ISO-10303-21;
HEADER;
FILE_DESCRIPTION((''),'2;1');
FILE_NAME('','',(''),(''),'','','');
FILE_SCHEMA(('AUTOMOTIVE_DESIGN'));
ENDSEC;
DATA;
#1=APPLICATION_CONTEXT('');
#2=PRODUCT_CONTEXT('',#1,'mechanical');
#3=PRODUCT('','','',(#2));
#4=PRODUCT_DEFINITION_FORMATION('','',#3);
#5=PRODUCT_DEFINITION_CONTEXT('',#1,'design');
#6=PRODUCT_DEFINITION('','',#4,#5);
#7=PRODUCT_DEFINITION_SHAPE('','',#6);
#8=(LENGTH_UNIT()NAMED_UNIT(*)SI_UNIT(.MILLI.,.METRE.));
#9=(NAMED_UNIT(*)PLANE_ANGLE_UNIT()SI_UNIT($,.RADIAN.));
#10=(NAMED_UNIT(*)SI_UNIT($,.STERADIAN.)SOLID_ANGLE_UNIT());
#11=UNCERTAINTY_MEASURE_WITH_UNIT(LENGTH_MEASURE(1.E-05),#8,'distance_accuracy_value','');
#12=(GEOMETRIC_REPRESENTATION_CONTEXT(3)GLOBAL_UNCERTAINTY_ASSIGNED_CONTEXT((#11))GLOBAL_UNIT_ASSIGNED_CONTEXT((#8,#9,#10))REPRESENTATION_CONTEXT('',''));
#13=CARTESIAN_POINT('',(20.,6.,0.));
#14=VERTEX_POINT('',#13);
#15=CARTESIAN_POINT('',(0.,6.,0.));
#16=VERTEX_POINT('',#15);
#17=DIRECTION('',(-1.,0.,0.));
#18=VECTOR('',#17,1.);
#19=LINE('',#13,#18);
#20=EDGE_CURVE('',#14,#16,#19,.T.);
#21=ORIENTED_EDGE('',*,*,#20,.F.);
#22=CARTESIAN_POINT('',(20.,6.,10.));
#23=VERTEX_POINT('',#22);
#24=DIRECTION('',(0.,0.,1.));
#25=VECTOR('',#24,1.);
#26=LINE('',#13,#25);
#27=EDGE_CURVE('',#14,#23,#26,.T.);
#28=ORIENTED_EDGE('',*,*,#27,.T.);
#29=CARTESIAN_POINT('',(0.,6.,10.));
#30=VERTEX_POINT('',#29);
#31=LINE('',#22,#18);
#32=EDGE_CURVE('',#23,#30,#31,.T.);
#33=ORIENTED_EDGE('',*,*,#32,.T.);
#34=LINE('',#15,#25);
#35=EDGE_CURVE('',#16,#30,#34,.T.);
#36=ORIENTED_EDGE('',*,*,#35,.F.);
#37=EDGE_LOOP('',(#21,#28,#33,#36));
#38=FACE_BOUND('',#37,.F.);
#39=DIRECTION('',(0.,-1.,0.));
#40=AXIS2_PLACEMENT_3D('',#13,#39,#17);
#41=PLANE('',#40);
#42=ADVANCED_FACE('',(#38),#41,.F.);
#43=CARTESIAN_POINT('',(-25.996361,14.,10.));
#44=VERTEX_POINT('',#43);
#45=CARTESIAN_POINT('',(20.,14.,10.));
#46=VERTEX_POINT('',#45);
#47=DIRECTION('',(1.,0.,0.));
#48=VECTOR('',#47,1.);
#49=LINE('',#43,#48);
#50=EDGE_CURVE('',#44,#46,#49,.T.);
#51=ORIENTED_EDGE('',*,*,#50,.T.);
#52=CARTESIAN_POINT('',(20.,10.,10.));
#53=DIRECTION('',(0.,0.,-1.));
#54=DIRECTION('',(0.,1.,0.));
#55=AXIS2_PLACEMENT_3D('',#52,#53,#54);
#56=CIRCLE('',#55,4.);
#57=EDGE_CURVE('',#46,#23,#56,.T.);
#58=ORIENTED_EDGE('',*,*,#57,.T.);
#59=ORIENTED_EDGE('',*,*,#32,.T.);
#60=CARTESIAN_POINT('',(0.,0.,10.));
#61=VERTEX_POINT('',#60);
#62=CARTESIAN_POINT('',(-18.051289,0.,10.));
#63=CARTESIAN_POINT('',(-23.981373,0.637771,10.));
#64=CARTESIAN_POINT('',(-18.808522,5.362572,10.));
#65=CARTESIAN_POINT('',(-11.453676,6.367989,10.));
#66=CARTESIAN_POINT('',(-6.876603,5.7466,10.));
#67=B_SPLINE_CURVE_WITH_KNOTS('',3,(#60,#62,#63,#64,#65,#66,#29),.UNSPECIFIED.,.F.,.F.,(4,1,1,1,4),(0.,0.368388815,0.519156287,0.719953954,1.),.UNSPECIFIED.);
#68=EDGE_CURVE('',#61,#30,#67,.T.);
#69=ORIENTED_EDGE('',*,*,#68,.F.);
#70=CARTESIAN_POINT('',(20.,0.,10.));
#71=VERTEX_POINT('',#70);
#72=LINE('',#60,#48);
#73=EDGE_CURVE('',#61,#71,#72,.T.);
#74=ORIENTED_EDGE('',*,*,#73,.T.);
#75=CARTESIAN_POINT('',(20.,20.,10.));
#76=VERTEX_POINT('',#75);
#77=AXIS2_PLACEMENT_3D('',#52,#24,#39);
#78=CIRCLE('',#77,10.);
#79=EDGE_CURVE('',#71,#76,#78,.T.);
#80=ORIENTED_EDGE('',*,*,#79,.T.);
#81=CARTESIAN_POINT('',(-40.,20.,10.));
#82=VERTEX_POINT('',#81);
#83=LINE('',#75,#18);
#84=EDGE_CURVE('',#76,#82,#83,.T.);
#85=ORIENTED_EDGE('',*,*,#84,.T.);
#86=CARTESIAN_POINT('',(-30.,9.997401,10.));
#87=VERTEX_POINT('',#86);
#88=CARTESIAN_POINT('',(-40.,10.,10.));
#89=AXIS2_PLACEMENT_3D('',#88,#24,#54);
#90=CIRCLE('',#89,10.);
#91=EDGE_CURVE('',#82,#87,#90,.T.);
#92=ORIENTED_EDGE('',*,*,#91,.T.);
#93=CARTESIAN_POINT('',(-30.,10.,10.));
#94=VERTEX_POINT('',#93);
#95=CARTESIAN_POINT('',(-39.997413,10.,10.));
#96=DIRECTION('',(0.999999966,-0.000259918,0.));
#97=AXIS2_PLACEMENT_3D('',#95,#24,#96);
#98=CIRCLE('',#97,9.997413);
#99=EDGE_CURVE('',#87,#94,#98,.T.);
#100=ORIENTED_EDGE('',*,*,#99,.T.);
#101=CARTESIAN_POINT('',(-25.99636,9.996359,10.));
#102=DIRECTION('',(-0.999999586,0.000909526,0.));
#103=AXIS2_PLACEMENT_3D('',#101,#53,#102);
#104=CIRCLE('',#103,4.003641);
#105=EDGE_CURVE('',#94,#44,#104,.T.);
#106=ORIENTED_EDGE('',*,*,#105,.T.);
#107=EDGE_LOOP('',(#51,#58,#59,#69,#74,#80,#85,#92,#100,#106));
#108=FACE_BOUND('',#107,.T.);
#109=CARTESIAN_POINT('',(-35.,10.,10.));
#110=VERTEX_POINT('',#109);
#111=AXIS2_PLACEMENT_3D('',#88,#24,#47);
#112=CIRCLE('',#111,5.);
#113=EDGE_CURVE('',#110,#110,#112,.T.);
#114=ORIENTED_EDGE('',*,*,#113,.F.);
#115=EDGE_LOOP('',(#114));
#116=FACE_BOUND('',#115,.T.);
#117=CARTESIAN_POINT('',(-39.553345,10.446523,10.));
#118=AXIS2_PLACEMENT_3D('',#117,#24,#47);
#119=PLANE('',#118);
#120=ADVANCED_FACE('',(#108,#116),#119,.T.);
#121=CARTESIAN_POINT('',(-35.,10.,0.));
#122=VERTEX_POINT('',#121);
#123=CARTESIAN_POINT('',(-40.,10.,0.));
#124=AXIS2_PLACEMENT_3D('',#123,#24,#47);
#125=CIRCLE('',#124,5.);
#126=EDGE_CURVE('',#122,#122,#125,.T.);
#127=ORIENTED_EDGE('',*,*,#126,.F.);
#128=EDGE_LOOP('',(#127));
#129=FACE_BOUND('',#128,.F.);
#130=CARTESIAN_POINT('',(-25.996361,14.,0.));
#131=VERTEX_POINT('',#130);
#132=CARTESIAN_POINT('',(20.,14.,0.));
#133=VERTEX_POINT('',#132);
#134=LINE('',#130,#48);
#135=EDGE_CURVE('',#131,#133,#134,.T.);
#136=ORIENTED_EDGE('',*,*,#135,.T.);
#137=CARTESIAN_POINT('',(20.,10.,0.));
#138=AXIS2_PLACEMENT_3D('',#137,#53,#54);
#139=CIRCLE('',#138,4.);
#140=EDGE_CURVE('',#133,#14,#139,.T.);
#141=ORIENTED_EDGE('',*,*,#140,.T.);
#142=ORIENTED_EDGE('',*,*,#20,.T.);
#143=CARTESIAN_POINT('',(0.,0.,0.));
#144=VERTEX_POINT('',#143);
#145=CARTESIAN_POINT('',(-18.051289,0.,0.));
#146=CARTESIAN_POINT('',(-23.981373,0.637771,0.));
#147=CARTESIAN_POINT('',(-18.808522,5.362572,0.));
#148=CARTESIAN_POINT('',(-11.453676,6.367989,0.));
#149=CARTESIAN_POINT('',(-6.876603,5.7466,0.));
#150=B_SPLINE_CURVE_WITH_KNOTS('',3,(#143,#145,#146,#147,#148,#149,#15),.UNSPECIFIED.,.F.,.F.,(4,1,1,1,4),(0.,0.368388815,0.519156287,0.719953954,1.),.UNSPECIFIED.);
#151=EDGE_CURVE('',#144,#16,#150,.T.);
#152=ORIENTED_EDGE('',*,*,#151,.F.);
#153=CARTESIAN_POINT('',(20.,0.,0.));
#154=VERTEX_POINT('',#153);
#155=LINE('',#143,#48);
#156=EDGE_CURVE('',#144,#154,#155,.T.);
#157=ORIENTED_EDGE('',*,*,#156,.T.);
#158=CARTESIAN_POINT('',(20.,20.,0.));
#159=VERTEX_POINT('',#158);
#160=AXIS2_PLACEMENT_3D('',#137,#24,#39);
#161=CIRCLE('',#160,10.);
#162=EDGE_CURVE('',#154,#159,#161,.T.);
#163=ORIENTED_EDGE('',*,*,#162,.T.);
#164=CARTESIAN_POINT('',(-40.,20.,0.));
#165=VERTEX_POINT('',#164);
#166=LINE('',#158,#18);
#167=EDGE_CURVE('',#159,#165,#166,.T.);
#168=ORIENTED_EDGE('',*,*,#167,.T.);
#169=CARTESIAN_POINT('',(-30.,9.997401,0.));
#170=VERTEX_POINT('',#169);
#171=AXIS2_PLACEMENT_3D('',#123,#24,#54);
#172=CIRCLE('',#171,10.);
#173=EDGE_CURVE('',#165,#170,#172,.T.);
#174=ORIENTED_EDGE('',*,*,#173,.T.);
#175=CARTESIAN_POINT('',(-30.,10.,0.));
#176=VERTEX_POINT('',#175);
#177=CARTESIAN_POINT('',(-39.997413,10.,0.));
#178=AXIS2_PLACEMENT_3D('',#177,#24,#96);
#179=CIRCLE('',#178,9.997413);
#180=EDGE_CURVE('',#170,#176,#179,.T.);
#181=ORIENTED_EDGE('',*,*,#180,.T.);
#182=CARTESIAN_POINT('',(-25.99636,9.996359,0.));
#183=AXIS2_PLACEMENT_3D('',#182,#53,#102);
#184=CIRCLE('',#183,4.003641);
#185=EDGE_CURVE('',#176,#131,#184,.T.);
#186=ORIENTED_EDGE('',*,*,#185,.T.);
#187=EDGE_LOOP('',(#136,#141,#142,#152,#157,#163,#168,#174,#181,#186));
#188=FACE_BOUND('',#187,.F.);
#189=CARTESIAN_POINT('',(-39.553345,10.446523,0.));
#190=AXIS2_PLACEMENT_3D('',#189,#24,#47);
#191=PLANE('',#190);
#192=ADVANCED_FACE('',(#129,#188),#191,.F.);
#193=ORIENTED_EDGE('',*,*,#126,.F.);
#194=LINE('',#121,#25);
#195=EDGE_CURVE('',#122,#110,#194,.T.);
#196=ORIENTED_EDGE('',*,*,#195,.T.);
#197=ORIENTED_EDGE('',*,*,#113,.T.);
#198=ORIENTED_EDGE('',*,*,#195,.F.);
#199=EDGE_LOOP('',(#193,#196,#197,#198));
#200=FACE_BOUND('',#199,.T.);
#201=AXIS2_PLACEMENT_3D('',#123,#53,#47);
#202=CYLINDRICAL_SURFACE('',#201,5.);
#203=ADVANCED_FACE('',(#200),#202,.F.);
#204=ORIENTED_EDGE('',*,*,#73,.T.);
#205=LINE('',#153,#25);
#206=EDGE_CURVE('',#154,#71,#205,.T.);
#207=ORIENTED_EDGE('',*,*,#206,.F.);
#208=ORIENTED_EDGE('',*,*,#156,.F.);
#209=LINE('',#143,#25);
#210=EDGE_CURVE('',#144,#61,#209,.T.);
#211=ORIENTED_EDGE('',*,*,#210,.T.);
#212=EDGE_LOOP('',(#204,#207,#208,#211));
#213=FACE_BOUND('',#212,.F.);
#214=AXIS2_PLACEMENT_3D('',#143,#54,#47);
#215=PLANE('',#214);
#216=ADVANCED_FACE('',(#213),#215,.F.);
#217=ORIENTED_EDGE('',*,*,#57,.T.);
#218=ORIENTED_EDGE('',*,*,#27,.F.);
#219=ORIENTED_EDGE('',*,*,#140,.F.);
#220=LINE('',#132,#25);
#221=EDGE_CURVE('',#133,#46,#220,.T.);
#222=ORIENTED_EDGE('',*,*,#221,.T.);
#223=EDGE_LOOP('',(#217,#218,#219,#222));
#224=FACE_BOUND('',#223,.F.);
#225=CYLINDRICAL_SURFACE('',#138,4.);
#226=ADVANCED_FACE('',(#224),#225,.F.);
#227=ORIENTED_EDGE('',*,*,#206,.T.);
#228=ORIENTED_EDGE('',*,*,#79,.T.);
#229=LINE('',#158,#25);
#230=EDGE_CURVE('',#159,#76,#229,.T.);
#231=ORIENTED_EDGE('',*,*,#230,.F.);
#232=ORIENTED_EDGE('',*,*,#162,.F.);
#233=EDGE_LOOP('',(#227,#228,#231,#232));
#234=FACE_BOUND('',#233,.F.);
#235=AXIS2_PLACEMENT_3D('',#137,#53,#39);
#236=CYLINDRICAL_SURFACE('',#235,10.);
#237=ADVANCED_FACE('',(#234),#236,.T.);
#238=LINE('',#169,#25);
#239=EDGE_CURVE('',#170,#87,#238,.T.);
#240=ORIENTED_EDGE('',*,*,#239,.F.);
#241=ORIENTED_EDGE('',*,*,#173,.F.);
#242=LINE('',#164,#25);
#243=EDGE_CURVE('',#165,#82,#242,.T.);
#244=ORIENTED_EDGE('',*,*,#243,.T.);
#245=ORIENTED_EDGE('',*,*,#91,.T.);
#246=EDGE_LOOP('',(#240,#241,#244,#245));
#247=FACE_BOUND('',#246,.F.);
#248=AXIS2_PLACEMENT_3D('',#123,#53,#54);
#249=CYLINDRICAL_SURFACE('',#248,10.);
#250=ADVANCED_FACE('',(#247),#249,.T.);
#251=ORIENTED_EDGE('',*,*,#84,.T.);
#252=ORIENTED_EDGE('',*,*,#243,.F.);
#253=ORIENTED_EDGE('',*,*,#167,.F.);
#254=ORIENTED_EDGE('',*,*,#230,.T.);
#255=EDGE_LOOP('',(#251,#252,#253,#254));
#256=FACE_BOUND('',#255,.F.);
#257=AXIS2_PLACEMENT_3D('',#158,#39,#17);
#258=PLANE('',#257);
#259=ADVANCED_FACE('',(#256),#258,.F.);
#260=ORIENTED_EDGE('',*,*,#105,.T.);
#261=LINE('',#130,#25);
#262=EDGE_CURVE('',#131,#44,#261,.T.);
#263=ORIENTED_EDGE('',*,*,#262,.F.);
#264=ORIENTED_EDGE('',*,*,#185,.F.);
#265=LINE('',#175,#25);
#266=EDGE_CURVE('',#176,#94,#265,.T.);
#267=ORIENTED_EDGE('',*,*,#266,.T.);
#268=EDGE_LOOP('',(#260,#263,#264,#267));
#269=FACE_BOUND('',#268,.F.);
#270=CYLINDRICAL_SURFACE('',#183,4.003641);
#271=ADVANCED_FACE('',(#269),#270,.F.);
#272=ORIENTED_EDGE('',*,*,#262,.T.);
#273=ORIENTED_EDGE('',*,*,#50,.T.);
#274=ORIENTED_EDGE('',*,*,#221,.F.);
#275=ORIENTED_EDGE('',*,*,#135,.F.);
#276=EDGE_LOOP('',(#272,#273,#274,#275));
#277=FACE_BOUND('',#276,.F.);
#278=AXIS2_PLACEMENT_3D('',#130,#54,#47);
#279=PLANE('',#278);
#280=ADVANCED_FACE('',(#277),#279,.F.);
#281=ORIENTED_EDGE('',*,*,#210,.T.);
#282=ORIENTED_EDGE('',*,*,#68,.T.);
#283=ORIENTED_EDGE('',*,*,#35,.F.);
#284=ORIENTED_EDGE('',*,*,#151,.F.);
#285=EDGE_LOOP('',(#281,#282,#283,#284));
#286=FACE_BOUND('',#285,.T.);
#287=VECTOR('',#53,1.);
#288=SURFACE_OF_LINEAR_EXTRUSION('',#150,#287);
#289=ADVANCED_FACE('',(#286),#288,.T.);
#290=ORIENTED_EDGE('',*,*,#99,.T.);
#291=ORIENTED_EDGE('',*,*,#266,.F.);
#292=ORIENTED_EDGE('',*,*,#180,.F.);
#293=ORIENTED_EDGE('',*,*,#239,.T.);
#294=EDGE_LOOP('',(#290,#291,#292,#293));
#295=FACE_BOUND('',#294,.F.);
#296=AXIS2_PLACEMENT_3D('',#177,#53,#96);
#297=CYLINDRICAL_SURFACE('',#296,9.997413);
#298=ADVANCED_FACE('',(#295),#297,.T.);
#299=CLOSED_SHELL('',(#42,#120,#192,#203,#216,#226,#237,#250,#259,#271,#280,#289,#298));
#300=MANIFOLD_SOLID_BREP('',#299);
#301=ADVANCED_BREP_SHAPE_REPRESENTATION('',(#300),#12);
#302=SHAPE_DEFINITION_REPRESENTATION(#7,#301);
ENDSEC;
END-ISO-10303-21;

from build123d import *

# Parameters (mm, degrees)
F0_R     = 5
F1_DEPTH = 10


# Not quite as in the source:
# - ends of sketch curves that miss each other by under 0.0002 mm in the source are joined


with BuildPart() as f1:
    # F0 (on Top) → F1 (new body)
    with BuildSketch(Plane.XY):
        with BuildLine():
            ThreePointArc((-30.0000003377, 9.9974011055), (-30.0000000844, 9.9987005527), (-30, 10))
            ThreePointArc((-30, 10), (-32.9289321881, 17.0710678119), (-40, 20))
            ThreePointArc((-40, 20), (-47.0719866001, 2.9298510958), (-30.0000003377, 9.9974011055))
        make_face()
        with Locations((-40, 10)):
            Circle(F0_R, mode=Mode.SUBTRACT)
        with BuildLine():
            ThreePointArc((-40, 20), (-32.9289321881, 17.0710678119), (-30, 10))
            ThreePointArc((-30, 10), (-28.8260746289, 12.8286475986), (-25.9963610747, 14))
            Line((-25.9963610747, 14), (20, 14))
            ThreePointArc((20, 14), (24, 10), (20, 6))
            Line((20, 6), (0, 6))
            add(Edge.make_bspline(
                [(0, 0), (-18.0512891521, 0), (-23.9813730686, 0.6377710425), (-18.8085221866, 5.3625723562), (-11.4536762775, 6.3679885575), (-6.8766033776, 5.7466003341), (0, 6)],
                knots=[0, 0, 0, 0, 0.3683888151, 0.5191562868, 0.7199539542, 1, 1, 1, 1], degree=3))
            Line((0, 0), (20, 0))
            ThreePointArc((20, 0), (30, 10), (20, 20))
            Line((20, 20), (-40, 20))
        make_face()
    extrude(amount=F1_DEPTH)


solid = f1.part
